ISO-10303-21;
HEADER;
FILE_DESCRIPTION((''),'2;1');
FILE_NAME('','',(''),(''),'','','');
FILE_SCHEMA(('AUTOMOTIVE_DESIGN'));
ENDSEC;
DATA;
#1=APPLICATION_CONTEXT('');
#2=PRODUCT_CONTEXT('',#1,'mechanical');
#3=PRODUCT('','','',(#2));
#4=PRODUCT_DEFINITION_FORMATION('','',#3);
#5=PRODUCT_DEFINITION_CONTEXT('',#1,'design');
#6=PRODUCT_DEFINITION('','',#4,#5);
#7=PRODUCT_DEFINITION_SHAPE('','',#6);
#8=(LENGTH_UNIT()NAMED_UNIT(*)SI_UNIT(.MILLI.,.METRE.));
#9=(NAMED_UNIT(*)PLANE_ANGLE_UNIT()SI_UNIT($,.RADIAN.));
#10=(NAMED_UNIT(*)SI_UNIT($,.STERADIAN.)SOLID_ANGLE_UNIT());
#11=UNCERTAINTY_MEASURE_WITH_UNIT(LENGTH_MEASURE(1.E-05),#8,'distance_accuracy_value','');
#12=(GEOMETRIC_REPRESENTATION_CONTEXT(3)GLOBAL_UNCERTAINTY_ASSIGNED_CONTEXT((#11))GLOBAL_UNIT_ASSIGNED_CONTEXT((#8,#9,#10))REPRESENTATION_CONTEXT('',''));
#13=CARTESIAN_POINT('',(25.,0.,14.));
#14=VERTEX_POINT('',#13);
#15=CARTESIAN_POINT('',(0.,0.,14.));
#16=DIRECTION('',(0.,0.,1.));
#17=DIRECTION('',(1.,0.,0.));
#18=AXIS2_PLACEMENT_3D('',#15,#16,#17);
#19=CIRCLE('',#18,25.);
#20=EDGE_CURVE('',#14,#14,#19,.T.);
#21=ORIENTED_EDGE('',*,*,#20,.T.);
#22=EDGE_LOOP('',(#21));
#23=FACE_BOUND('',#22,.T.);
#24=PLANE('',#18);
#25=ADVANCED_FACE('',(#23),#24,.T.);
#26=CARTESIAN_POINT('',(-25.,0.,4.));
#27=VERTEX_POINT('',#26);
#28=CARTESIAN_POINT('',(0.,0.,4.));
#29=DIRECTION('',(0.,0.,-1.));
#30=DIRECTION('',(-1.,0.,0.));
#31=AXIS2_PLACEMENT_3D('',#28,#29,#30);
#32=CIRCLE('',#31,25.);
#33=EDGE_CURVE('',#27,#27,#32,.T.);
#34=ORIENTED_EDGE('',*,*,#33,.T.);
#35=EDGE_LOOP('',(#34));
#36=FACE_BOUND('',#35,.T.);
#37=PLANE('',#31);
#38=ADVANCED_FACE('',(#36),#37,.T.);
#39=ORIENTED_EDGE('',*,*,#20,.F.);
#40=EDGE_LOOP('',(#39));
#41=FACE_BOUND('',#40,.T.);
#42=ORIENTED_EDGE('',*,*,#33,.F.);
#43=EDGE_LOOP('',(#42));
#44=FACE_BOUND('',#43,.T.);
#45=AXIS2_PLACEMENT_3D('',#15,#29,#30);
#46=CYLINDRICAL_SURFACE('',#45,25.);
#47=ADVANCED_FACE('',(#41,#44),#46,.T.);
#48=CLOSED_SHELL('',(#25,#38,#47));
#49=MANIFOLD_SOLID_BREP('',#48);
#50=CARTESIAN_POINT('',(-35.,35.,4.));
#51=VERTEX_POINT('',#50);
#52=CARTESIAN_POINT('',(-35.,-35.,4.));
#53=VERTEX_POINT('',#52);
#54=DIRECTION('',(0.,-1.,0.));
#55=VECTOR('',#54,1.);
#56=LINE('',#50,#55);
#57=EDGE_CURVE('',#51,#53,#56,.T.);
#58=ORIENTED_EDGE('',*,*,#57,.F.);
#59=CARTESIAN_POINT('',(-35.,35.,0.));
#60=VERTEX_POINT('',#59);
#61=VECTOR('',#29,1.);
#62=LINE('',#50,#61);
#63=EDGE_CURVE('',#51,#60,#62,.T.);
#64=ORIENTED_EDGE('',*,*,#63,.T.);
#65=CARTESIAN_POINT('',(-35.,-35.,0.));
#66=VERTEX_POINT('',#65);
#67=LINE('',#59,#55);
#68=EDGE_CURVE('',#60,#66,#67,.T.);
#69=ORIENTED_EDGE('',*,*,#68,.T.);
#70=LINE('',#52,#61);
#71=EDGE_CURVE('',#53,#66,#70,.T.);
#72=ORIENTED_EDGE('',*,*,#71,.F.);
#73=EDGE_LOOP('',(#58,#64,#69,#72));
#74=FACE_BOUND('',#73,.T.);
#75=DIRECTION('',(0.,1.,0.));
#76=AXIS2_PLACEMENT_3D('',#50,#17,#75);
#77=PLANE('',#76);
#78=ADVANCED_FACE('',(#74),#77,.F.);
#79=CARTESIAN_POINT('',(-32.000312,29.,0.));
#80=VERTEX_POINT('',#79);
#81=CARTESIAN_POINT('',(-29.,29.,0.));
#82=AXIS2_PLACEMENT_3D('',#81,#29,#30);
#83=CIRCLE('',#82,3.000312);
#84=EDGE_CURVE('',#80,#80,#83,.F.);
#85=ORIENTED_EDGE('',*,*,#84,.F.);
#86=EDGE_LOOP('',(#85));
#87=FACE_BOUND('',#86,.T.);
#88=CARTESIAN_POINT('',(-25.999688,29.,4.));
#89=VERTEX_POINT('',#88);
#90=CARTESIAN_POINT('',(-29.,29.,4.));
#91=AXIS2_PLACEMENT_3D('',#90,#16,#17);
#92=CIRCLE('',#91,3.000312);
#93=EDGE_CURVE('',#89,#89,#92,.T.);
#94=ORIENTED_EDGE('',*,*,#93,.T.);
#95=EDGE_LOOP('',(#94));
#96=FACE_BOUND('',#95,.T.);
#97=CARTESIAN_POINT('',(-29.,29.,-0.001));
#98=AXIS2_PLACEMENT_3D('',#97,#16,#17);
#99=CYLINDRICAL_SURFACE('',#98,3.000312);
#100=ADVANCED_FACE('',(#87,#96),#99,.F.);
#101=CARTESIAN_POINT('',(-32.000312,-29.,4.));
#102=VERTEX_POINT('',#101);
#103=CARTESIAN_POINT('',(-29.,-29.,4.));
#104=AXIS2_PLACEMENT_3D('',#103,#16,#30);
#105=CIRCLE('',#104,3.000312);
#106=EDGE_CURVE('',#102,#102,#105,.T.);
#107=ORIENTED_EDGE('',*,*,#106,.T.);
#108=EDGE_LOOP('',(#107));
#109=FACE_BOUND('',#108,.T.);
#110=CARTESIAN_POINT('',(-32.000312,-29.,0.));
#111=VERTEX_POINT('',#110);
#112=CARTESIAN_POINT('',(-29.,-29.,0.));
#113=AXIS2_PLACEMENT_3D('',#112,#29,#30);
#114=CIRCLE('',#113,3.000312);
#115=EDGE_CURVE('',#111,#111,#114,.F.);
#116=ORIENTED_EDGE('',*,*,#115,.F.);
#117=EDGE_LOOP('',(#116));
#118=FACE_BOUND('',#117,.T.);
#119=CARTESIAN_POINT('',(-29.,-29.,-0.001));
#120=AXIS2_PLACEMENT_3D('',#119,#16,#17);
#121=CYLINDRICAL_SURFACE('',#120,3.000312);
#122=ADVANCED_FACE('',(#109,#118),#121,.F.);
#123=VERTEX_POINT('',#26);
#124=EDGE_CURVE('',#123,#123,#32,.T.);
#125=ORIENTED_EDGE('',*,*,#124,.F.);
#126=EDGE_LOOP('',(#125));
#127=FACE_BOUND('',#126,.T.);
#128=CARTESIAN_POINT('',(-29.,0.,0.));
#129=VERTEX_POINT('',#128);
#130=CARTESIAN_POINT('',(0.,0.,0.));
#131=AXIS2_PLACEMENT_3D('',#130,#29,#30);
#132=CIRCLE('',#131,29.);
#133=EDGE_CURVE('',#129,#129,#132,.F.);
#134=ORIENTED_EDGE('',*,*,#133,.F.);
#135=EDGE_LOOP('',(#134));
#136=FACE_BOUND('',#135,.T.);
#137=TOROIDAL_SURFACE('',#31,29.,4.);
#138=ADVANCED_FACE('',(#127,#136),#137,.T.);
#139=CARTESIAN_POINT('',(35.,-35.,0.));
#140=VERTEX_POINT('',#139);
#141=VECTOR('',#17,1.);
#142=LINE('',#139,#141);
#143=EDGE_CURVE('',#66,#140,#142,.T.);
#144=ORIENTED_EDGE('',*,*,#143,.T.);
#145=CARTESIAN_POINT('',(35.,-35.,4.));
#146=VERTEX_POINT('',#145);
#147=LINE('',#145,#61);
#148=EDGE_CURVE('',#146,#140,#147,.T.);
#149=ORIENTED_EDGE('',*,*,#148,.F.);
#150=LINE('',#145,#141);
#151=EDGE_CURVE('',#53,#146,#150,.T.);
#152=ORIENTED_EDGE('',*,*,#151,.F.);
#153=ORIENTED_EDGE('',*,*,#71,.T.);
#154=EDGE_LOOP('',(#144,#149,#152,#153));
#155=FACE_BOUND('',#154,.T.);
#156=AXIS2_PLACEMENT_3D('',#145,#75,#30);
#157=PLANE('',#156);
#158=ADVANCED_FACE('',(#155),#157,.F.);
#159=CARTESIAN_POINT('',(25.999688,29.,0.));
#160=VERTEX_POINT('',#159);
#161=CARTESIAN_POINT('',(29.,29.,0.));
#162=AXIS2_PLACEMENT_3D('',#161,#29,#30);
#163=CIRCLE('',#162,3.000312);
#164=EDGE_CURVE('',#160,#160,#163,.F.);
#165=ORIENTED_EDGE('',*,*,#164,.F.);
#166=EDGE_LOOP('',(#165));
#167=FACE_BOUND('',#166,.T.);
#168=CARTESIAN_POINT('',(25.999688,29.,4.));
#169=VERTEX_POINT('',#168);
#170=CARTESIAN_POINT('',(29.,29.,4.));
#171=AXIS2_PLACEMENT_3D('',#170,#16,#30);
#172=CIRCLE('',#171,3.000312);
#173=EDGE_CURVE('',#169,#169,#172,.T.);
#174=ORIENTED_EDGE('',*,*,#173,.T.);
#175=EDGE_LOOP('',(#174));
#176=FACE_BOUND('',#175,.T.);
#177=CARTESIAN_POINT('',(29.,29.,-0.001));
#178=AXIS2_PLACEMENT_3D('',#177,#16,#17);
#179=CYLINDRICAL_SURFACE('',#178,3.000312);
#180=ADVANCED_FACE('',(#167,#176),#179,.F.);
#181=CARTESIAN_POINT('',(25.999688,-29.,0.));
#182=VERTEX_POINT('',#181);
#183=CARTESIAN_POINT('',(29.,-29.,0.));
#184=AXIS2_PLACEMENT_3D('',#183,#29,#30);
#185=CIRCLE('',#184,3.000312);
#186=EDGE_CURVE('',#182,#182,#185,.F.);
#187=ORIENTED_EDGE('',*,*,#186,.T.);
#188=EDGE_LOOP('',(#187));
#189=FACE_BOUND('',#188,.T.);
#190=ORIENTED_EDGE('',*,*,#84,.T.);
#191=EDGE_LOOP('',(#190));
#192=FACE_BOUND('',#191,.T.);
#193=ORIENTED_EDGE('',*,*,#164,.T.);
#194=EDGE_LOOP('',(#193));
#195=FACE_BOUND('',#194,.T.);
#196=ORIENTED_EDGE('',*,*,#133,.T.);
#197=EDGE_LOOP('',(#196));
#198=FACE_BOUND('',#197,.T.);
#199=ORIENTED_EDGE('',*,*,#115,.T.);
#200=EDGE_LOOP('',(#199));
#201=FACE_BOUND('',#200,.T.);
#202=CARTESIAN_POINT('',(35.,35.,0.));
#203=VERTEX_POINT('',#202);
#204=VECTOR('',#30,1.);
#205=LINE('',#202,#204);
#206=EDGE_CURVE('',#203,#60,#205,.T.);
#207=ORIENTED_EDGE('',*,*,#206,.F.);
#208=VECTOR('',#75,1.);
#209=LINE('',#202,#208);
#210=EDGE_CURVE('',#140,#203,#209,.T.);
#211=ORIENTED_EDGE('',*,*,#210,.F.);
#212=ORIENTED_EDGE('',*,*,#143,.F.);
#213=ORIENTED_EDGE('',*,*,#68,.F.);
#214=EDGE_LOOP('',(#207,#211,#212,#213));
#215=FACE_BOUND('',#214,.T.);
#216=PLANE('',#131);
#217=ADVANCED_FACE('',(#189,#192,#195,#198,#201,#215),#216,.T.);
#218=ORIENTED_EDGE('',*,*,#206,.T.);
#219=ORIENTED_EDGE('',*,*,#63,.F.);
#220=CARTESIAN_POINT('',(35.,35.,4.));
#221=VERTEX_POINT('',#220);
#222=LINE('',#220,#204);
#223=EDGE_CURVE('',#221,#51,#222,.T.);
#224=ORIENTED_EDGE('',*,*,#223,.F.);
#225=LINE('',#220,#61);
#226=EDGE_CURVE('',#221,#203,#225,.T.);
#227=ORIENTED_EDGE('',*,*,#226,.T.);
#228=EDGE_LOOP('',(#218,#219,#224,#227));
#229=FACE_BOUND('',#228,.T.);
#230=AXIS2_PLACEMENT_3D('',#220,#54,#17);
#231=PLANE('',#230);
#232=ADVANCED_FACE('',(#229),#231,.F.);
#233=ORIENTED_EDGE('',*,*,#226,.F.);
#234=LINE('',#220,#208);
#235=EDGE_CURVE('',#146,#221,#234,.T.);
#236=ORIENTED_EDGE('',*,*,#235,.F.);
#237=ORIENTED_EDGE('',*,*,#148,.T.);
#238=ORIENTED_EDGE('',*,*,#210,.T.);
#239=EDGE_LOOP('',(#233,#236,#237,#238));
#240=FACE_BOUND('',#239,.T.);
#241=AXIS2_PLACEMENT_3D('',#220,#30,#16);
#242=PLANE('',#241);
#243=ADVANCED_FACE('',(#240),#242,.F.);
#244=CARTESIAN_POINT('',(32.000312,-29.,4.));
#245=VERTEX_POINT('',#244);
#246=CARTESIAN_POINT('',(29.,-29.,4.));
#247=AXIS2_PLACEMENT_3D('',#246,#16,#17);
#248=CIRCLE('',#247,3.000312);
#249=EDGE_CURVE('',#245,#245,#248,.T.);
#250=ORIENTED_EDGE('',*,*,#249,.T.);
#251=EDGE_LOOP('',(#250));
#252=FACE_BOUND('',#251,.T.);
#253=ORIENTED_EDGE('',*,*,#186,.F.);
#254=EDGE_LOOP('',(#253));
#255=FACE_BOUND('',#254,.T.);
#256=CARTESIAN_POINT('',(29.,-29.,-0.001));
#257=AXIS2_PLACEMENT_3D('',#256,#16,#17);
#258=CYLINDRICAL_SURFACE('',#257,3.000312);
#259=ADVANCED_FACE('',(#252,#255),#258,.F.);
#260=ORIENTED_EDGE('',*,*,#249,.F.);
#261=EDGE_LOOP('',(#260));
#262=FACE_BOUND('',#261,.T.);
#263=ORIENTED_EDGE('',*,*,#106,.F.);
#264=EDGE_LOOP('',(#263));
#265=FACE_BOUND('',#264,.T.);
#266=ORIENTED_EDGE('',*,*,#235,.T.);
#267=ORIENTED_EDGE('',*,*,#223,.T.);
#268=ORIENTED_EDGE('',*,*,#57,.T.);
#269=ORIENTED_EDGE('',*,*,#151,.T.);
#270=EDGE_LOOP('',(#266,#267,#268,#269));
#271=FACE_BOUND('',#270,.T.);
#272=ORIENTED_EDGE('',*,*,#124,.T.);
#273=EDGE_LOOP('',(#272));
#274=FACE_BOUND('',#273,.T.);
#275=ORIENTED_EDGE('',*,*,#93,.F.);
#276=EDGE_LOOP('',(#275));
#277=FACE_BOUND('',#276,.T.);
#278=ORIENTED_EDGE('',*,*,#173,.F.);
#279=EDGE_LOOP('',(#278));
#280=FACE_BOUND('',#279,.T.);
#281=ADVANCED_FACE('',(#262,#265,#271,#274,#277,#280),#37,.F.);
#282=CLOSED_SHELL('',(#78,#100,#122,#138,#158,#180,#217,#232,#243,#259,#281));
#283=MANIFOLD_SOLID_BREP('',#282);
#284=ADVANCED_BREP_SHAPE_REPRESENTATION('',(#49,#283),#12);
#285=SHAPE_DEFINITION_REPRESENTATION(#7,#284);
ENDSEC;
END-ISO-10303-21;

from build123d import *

# Parameters (mm, degrees)
SKETCH1_W           = 70
SKETCH1_H           = 70
BOSS_EXTRUDE1_DEPTH = 4
SKETCH2_R           = 25
BOSS_EXTRUDE2_DEPTH = 10
SKETCH3_R           = 25
CUT_EXTRUDE1_DEPTH  = 4
FILLET1_R           = 4
SKETCH4_R           = 3.000311633
CUT_EXTRUDE2_DEPTH  = 4


with BuildPart() as part:
    # Sketch1 → Boss-Extrude1 (new body)
    with BuildSketch(Plane.XY):
        Rectangle(SKETCH1_W, SKETCH1_H)
    extrude(amount=BOSS_EXTRUDE1_DEPTH)

    # Sketch2 → Boss-Extrude2 (add)
    with BuildSketch(Plane.XY.offset(4)):
        with Locations(Location((0, 0, 0), (0, 0, 180))):
            Circle(SKETCH2_R)
    extrude(amount=BOSS_EXTRUDE2_DEPTH)

    # Sketch3 → Cut-Extrude1 (cut)
    with BuildSketch(Plane(origin=(0, 0, 0), x_dir=(-1, 0, 0), z_dir=(0, 0, -1))):
        Circle(SKETCH3_R)
    extrude(amount=-CUT_EXTRUDE1_DEPTH, mode=Mode.SUBTRACT)


with BuildPart() as cut_extrude1_piece_1:
    # of the separate pieces the step leaves, piece 1, a body of its own (cut_extrude1_pieces)
    add(part.part.solids().sort_by_distance((-25, 0, 14))[0])


with BuildPart() as cut_extrude1_piece_2:
    # of the separate pieces the step leaves, piece 2, a body of its own (cut_extrude1_pieces)
    add(part.part.solids().sort_by_distance((35, 35, 0))[0])

    # Fillet1
    fillet1_edges = [cut_extrude1_piece_2.edges().sort_by_distance(p)[0] for p in [
        (25, 0, 0),
    ]]
    fillet(fillet1_edges, radius=FILLET1_R - 0.0001)  # a hair under: the kernel refuses the full size

    # Sketch4 → Cut-Extrude2 (cut)
    with BuildSketch(Plane.XY.offset(4)):
        with Locations((-29, 29)):
            Circle(SKETCH4_R)
        with Locations(Location((29, 29, 0), (0, 0, 180))):
            Circle(SKETCH4_R)
        with Locations(Location((-29, -29, 0), (0, 0, 180))):
            Circle(SKETCH4_R)
        with Locations((29, -29)):
            Circle(SKETCH4_R)
    extrude(amount=-CUT_EXTRUDE2_DEPTH, mode=Mode.SUBTRACT)


solid = Compound([cut_extrude1_piece_1.part, cut_extrude1_piece_2.part])
